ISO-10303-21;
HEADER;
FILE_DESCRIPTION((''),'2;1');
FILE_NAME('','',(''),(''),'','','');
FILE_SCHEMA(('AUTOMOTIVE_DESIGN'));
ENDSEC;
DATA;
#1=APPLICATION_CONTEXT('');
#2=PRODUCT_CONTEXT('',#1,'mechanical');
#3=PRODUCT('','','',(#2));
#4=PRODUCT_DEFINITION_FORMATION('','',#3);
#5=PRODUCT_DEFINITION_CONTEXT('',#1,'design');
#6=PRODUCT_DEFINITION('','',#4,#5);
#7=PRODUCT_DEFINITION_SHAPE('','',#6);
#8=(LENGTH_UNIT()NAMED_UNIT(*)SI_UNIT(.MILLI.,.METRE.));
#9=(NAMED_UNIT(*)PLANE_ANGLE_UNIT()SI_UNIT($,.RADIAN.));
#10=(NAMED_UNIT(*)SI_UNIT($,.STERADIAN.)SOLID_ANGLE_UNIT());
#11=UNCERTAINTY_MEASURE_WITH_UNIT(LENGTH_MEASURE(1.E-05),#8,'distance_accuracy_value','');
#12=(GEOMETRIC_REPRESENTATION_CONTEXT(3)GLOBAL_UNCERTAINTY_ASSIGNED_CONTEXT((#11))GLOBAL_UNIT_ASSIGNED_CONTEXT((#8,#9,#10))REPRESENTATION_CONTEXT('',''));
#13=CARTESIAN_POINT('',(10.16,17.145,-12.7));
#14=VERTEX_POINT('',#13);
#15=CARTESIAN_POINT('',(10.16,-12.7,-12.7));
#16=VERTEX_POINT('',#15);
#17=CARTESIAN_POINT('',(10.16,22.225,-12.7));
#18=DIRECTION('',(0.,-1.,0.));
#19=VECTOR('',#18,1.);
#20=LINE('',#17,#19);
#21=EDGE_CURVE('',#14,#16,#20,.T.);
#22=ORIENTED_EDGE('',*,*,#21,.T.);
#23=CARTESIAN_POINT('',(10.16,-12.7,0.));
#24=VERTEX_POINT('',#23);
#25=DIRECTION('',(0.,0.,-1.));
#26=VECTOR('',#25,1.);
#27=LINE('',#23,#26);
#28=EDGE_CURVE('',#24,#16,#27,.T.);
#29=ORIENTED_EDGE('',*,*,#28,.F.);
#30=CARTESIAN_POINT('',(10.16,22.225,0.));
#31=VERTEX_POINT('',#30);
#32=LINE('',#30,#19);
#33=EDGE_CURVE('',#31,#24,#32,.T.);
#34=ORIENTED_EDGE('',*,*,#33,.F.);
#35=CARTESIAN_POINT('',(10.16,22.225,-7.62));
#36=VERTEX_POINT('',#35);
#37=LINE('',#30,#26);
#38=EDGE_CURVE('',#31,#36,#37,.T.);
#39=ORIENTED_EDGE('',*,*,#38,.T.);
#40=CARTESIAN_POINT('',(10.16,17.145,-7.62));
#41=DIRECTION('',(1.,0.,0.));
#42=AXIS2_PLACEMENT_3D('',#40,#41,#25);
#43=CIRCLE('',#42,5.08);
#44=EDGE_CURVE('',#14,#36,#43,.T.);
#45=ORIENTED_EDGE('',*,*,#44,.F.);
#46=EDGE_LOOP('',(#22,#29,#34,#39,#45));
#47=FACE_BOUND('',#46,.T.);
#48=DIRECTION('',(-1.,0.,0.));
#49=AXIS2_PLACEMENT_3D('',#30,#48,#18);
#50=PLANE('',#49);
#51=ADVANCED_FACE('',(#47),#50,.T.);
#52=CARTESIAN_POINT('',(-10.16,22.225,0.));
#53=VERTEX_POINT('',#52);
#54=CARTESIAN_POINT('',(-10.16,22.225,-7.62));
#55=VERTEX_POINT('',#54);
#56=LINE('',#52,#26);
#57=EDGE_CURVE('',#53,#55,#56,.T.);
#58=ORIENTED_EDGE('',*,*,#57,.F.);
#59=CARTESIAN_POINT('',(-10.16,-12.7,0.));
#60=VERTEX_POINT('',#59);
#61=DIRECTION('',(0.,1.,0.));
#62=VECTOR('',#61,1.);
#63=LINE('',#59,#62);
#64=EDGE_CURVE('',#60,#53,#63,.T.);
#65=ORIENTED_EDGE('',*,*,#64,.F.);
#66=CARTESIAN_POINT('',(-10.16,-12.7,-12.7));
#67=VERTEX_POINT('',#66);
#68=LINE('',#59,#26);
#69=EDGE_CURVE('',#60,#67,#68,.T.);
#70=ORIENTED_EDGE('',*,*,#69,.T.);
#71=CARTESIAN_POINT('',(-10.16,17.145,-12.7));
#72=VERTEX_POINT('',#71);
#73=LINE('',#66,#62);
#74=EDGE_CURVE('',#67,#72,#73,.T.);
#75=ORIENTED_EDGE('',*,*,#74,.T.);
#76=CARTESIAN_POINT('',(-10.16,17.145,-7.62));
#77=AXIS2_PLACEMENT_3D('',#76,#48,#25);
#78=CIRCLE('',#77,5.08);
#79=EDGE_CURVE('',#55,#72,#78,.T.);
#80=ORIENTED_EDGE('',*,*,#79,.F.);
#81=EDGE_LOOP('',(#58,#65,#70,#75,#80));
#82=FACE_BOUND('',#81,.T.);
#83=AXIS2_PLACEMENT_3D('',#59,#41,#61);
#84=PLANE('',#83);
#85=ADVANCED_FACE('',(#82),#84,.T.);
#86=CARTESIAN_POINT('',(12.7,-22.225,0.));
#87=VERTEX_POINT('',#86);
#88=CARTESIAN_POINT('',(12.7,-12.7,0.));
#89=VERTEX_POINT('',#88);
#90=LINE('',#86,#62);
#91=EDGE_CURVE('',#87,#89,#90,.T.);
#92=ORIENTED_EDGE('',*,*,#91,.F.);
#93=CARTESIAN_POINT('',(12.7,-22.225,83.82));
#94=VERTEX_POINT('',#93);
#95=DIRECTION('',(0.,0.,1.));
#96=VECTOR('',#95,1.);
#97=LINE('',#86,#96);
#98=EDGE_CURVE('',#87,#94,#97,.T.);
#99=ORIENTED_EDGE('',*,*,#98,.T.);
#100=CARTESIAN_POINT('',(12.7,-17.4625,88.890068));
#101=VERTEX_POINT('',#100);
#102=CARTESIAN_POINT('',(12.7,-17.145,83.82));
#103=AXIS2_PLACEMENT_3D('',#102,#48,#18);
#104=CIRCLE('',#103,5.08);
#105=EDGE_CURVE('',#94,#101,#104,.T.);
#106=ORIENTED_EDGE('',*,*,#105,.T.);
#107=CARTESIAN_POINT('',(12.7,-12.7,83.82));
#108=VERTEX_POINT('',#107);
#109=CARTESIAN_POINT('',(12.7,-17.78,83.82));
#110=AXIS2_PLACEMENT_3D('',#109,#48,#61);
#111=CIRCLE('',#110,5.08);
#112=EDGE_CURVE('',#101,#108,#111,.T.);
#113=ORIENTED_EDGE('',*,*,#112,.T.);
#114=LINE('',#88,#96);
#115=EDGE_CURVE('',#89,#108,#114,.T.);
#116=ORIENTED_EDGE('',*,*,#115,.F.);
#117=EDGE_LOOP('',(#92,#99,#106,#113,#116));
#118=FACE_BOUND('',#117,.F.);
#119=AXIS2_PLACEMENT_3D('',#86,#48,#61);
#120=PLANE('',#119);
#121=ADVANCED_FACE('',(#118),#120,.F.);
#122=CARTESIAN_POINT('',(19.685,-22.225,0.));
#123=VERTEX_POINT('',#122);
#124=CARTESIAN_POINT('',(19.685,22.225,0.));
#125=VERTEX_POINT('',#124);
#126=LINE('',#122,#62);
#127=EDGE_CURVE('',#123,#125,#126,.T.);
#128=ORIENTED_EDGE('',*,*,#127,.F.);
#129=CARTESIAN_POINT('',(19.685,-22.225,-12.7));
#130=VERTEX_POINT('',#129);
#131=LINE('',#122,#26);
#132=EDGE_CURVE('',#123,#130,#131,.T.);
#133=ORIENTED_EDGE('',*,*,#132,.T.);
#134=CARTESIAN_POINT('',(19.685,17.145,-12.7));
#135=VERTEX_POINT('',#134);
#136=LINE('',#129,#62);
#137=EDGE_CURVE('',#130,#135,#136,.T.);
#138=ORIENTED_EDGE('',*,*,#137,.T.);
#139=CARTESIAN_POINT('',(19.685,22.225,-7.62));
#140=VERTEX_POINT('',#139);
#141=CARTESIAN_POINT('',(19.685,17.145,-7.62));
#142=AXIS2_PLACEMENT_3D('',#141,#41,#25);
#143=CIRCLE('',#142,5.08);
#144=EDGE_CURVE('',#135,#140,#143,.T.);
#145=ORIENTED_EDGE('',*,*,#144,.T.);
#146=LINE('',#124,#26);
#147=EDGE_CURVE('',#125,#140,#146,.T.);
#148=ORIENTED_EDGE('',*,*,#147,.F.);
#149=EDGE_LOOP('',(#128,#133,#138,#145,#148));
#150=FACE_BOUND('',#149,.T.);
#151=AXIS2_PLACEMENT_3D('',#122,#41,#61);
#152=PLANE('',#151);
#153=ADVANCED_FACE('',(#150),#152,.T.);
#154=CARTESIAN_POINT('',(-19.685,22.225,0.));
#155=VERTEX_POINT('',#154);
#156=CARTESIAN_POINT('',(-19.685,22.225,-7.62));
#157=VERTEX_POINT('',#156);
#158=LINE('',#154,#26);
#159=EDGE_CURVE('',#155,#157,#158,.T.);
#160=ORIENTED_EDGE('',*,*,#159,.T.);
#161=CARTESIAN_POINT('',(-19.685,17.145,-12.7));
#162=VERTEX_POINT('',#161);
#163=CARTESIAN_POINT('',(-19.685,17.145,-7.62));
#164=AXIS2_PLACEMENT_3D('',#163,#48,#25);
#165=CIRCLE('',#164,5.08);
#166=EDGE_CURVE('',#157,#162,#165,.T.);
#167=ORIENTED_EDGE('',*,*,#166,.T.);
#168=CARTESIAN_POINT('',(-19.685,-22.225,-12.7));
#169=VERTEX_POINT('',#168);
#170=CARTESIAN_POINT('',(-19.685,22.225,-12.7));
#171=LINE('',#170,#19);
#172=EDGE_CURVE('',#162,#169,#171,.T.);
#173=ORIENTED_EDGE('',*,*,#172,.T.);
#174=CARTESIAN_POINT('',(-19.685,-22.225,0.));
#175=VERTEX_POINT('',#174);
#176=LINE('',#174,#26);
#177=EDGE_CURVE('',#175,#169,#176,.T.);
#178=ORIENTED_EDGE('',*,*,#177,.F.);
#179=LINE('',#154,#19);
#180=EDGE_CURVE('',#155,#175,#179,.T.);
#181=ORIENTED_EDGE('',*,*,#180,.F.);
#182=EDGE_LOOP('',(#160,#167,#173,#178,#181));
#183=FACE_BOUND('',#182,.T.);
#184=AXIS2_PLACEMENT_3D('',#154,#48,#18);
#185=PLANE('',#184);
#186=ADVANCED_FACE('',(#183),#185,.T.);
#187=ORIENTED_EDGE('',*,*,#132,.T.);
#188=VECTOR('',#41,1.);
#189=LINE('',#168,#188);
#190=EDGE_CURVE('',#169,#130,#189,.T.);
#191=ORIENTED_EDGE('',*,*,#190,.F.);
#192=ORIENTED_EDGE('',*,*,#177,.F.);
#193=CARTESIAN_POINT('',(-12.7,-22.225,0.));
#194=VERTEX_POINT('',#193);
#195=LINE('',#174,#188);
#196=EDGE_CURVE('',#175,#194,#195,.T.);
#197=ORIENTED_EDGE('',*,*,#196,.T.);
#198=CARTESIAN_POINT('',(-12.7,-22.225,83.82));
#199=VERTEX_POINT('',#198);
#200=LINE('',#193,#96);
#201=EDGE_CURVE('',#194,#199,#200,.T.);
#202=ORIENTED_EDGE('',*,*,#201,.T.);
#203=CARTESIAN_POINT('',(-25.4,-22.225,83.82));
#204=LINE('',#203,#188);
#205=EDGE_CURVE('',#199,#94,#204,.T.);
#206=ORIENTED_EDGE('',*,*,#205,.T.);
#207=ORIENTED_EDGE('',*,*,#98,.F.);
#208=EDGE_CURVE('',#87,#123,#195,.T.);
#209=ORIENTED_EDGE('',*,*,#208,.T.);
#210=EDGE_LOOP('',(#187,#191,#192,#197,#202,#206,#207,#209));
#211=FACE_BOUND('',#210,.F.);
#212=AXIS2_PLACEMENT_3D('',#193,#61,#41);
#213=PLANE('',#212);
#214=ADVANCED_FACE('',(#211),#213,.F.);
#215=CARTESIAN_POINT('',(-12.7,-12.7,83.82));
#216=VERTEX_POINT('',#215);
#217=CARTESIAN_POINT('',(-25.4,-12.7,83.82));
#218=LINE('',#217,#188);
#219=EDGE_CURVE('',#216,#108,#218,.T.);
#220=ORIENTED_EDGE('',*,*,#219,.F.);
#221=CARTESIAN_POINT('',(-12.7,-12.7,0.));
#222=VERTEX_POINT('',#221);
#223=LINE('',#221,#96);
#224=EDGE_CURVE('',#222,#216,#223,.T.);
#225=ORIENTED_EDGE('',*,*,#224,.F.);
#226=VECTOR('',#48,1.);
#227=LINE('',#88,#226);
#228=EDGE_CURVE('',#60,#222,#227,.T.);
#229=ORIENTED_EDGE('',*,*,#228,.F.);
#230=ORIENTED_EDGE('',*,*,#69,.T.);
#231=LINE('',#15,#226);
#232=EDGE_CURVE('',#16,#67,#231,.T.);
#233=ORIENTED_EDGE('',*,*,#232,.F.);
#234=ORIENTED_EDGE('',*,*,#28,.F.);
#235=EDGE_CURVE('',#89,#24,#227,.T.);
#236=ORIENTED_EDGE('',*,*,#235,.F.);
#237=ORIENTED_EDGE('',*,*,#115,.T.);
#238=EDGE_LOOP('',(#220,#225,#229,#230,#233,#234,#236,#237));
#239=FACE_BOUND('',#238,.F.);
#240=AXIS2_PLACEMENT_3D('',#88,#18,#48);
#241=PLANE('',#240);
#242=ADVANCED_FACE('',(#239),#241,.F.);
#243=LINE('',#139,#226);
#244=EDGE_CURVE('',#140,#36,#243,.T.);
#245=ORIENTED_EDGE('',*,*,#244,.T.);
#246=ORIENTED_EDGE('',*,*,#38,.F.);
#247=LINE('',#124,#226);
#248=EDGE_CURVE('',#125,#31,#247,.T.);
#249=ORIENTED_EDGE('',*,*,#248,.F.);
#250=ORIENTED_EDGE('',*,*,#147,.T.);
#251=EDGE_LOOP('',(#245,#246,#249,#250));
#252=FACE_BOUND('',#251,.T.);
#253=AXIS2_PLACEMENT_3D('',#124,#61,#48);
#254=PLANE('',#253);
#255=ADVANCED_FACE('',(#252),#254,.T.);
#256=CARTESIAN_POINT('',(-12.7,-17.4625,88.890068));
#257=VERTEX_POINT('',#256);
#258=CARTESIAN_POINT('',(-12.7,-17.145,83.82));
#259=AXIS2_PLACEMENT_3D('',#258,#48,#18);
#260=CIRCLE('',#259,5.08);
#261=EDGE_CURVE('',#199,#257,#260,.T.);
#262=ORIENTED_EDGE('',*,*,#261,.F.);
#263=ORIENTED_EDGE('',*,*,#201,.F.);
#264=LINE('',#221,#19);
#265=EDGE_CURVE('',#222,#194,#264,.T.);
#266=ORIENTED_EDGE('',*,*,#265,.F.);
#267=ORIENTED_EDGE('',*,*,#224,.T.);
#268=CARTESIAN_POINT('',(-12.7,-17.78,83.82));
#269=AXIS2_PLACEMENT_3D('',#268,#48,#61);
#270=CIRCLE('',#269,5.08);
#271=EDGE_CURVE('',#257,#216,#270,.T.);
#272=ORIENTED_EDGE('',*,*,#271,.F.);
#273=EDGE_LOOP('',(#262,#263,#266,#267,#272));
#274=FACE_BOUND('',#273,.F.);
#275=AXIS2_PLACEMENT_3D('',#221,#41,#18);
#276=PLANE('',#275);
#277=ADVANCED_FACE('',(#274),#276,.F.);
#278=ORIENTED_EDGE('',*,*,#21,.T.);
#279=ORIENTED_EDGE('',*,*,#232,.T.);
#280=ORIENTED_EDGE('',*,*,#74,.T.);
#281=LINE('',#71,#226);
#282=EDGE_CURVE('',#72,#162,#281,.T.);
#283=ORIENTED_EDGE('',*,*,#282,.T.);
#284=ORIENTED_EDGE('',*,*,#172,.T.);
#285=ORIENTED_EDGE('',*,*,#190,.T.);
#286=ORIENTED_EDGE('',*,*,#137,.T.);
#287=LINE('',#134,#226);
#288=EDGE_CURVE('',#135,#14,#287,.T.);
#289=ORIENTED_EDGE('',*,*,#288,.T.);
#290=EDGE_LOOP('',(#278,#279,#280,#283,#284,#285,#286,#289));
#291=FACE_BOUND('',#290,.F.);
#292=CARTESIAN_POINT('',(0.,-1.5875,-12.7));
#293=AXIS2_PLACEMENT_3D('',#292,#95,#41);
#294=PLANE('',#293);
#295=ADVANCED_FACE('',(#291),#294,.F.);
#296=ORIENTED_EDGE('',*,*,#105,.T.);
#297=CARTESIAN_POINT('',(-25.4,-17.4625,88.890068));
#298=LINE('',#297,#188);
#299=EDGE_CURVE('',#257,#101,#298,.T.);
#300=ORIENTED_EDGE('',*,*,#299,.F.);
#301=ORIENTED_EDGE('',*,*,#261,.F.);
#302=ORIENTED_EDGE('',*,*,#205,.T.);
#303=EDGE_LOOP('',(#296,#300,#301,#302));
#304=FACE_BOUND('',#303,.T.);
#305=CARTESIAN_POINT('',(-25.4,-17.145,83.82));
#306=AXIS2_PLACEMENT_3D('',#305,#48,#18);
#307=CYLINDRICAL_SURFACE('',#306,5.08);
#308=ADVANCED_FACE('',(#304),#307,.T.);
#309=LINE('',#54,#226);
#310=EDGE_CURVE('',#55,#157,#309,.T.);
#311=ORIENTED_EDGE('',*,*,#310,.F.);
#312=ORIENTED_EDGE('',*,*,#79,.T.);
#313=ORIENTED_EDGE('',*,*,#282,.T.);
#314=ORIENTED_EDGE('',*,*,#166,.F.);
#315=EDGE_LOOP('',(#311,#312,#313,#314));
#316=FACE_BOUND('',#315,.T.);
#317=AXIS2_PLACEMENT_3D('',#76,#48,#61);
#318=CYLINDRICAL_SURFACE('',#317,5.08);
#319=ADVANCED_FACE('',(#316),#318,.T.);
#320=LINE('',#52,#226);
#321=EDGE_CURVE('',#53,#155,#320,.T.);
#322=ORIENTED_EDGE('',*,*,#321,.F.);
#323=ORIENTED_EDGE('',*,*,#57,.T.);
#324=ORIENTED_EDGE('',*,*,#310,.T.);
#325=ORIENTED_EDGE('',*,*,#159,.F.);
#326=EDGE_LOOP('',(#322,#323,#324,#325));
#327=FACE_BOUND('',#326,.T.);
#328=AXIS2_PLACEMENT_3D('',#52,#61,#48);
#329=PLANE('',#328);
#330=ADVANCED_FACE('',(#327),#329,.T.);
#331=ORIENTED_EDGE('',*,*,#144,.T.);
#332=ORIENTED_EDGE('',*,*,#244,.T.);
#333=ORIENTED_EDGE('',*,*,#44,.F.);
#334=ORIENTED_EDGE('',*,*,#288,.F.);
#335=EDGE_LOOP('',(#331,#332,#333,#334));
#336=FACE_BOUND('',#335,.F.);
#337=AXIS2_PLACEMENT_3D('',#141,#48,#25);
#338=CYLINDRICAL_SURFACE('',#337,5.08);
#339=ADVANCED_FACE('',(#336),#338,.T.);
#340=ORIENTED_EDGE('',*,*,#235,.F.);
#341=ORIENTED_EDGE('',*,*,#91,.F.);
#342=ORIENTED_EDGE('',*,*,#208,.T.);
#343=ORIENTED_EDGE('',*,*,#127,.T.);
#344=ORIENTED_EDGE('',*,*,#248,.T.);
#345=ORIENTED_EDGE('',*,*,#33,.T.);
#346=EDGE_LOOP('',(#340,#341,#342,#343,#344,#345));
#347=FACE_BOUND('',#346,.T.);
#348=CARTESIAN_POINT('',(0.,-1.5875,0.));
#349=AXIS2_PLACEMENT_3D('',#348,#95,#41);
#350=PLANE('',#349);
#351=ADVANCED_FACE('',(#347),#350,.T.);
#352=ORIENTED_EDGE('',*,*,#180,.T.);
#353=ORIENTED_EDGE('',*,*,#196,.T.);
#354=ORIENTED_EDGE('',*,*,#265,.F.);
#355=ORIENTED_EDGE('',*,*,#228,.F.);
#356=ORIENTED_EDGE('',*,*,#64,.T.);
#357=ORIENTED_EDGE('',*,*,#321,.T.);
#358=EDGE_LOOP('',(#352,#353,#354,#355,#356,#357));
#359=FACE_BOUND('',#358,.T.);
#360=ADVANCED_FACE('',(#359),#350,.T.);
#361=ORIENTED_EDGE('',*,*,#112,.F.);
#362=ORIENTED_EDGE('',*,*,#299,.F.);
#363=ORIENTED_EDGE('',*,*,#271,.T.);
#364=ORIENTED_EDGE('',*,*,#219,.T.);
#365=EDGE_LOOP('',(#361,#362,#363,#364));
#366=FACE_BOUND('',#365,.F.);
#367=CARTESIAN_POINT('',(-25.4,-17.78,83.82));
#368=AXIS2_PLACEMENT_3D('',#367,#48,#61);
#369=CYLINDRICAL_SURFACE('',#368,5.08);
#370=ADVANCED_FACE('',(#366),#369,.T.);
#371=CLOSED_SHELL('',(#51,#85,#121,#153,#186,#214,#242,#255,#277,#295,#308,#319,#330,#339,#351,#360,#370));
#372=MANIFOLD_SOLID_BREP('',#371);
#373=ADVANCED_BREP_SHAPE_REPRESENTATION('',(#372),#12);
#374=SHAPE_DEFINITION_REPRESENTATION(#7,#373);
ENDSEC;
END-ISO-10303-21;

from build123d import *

# Parameters (mm, degrees)
F1_DEPTH    = 12.7
F3_DEPTH    = 88.9
F4_T1_DEPTH = 50.8
F5_R        = 5.08


# Not quite as in the source:
# - a fillet or chamfer that OpenCascade refuses, or shapes differently, is made with other operations: its cross-section is extruded or revolved along the edge and cut away or added
# - a feature names something its author has since deleted; it is built from what else it names


with BuildPart() as f1:
    # F0 (on Top) → F1 (new body)
    with BuildSketch(Plane.XY):
        Polygon((10.16, 12.7), (10.16, -12.7), (-10.16, -12.7), (-10.16, 12.7), (-10.16, 22.225), (-19.685, 22.225), (-19.685, -22.225), (19.685, -22.225), (19.685, 22.225), (10.16, 22.225), align=None)
    extrude(amount=-F1_DEPTH)

    # F2 (on face) → F3 (join)
    with BuildSketch(Plane.XY):
        Polygon((-12.7, -12.7), (-12.7, -22.225), (12.7, -22.225), (12.7, -12.7), (10.16, -12.7), (-10.16, -12.7), align=None)
    extrude(amount=F3_DEPTH)

    # F4: fillet of radius 5.08 on 2 edges, made by hand

    # F4_s2 → F4_t1 (cut)
    with BuildSketch(Plane.YZ.offset(-25.4)):
        with BuildLine():
            ThreePointArc((-12.7, 83.82), (-14.1878975516, 87.4121024484), (-17.78, 88.9))
            Line((-17.78, 88.9), (-12.7, 88.9))
            Line((-12.7, 88.9), (-12.7, 83.82))
        make_face()
        with BuildLine():
            ThreePointArc((-22.225, 83.82), (-20.7371024484, 87.4121024484), (-17.145, 88.9))
            Line((-17.145, 88.9), (-22.225, 88.9))
            Line((-22.225, 88.9), (-22.225, 83.82))
        make_face()
    extrude(amount=F4_T1_DEPTH, mode=Mode.SUBTRACT)

    # F5
    f5_edges = [f1.edges().sort_by_distance(p)[0] for p in [
        (14.9225, 22.225, -12.7),
        (-14.9225, 22.225, -12.7),
    ]]
    fillet(f5_edges, radius=F5_R)


solid = f1.part
